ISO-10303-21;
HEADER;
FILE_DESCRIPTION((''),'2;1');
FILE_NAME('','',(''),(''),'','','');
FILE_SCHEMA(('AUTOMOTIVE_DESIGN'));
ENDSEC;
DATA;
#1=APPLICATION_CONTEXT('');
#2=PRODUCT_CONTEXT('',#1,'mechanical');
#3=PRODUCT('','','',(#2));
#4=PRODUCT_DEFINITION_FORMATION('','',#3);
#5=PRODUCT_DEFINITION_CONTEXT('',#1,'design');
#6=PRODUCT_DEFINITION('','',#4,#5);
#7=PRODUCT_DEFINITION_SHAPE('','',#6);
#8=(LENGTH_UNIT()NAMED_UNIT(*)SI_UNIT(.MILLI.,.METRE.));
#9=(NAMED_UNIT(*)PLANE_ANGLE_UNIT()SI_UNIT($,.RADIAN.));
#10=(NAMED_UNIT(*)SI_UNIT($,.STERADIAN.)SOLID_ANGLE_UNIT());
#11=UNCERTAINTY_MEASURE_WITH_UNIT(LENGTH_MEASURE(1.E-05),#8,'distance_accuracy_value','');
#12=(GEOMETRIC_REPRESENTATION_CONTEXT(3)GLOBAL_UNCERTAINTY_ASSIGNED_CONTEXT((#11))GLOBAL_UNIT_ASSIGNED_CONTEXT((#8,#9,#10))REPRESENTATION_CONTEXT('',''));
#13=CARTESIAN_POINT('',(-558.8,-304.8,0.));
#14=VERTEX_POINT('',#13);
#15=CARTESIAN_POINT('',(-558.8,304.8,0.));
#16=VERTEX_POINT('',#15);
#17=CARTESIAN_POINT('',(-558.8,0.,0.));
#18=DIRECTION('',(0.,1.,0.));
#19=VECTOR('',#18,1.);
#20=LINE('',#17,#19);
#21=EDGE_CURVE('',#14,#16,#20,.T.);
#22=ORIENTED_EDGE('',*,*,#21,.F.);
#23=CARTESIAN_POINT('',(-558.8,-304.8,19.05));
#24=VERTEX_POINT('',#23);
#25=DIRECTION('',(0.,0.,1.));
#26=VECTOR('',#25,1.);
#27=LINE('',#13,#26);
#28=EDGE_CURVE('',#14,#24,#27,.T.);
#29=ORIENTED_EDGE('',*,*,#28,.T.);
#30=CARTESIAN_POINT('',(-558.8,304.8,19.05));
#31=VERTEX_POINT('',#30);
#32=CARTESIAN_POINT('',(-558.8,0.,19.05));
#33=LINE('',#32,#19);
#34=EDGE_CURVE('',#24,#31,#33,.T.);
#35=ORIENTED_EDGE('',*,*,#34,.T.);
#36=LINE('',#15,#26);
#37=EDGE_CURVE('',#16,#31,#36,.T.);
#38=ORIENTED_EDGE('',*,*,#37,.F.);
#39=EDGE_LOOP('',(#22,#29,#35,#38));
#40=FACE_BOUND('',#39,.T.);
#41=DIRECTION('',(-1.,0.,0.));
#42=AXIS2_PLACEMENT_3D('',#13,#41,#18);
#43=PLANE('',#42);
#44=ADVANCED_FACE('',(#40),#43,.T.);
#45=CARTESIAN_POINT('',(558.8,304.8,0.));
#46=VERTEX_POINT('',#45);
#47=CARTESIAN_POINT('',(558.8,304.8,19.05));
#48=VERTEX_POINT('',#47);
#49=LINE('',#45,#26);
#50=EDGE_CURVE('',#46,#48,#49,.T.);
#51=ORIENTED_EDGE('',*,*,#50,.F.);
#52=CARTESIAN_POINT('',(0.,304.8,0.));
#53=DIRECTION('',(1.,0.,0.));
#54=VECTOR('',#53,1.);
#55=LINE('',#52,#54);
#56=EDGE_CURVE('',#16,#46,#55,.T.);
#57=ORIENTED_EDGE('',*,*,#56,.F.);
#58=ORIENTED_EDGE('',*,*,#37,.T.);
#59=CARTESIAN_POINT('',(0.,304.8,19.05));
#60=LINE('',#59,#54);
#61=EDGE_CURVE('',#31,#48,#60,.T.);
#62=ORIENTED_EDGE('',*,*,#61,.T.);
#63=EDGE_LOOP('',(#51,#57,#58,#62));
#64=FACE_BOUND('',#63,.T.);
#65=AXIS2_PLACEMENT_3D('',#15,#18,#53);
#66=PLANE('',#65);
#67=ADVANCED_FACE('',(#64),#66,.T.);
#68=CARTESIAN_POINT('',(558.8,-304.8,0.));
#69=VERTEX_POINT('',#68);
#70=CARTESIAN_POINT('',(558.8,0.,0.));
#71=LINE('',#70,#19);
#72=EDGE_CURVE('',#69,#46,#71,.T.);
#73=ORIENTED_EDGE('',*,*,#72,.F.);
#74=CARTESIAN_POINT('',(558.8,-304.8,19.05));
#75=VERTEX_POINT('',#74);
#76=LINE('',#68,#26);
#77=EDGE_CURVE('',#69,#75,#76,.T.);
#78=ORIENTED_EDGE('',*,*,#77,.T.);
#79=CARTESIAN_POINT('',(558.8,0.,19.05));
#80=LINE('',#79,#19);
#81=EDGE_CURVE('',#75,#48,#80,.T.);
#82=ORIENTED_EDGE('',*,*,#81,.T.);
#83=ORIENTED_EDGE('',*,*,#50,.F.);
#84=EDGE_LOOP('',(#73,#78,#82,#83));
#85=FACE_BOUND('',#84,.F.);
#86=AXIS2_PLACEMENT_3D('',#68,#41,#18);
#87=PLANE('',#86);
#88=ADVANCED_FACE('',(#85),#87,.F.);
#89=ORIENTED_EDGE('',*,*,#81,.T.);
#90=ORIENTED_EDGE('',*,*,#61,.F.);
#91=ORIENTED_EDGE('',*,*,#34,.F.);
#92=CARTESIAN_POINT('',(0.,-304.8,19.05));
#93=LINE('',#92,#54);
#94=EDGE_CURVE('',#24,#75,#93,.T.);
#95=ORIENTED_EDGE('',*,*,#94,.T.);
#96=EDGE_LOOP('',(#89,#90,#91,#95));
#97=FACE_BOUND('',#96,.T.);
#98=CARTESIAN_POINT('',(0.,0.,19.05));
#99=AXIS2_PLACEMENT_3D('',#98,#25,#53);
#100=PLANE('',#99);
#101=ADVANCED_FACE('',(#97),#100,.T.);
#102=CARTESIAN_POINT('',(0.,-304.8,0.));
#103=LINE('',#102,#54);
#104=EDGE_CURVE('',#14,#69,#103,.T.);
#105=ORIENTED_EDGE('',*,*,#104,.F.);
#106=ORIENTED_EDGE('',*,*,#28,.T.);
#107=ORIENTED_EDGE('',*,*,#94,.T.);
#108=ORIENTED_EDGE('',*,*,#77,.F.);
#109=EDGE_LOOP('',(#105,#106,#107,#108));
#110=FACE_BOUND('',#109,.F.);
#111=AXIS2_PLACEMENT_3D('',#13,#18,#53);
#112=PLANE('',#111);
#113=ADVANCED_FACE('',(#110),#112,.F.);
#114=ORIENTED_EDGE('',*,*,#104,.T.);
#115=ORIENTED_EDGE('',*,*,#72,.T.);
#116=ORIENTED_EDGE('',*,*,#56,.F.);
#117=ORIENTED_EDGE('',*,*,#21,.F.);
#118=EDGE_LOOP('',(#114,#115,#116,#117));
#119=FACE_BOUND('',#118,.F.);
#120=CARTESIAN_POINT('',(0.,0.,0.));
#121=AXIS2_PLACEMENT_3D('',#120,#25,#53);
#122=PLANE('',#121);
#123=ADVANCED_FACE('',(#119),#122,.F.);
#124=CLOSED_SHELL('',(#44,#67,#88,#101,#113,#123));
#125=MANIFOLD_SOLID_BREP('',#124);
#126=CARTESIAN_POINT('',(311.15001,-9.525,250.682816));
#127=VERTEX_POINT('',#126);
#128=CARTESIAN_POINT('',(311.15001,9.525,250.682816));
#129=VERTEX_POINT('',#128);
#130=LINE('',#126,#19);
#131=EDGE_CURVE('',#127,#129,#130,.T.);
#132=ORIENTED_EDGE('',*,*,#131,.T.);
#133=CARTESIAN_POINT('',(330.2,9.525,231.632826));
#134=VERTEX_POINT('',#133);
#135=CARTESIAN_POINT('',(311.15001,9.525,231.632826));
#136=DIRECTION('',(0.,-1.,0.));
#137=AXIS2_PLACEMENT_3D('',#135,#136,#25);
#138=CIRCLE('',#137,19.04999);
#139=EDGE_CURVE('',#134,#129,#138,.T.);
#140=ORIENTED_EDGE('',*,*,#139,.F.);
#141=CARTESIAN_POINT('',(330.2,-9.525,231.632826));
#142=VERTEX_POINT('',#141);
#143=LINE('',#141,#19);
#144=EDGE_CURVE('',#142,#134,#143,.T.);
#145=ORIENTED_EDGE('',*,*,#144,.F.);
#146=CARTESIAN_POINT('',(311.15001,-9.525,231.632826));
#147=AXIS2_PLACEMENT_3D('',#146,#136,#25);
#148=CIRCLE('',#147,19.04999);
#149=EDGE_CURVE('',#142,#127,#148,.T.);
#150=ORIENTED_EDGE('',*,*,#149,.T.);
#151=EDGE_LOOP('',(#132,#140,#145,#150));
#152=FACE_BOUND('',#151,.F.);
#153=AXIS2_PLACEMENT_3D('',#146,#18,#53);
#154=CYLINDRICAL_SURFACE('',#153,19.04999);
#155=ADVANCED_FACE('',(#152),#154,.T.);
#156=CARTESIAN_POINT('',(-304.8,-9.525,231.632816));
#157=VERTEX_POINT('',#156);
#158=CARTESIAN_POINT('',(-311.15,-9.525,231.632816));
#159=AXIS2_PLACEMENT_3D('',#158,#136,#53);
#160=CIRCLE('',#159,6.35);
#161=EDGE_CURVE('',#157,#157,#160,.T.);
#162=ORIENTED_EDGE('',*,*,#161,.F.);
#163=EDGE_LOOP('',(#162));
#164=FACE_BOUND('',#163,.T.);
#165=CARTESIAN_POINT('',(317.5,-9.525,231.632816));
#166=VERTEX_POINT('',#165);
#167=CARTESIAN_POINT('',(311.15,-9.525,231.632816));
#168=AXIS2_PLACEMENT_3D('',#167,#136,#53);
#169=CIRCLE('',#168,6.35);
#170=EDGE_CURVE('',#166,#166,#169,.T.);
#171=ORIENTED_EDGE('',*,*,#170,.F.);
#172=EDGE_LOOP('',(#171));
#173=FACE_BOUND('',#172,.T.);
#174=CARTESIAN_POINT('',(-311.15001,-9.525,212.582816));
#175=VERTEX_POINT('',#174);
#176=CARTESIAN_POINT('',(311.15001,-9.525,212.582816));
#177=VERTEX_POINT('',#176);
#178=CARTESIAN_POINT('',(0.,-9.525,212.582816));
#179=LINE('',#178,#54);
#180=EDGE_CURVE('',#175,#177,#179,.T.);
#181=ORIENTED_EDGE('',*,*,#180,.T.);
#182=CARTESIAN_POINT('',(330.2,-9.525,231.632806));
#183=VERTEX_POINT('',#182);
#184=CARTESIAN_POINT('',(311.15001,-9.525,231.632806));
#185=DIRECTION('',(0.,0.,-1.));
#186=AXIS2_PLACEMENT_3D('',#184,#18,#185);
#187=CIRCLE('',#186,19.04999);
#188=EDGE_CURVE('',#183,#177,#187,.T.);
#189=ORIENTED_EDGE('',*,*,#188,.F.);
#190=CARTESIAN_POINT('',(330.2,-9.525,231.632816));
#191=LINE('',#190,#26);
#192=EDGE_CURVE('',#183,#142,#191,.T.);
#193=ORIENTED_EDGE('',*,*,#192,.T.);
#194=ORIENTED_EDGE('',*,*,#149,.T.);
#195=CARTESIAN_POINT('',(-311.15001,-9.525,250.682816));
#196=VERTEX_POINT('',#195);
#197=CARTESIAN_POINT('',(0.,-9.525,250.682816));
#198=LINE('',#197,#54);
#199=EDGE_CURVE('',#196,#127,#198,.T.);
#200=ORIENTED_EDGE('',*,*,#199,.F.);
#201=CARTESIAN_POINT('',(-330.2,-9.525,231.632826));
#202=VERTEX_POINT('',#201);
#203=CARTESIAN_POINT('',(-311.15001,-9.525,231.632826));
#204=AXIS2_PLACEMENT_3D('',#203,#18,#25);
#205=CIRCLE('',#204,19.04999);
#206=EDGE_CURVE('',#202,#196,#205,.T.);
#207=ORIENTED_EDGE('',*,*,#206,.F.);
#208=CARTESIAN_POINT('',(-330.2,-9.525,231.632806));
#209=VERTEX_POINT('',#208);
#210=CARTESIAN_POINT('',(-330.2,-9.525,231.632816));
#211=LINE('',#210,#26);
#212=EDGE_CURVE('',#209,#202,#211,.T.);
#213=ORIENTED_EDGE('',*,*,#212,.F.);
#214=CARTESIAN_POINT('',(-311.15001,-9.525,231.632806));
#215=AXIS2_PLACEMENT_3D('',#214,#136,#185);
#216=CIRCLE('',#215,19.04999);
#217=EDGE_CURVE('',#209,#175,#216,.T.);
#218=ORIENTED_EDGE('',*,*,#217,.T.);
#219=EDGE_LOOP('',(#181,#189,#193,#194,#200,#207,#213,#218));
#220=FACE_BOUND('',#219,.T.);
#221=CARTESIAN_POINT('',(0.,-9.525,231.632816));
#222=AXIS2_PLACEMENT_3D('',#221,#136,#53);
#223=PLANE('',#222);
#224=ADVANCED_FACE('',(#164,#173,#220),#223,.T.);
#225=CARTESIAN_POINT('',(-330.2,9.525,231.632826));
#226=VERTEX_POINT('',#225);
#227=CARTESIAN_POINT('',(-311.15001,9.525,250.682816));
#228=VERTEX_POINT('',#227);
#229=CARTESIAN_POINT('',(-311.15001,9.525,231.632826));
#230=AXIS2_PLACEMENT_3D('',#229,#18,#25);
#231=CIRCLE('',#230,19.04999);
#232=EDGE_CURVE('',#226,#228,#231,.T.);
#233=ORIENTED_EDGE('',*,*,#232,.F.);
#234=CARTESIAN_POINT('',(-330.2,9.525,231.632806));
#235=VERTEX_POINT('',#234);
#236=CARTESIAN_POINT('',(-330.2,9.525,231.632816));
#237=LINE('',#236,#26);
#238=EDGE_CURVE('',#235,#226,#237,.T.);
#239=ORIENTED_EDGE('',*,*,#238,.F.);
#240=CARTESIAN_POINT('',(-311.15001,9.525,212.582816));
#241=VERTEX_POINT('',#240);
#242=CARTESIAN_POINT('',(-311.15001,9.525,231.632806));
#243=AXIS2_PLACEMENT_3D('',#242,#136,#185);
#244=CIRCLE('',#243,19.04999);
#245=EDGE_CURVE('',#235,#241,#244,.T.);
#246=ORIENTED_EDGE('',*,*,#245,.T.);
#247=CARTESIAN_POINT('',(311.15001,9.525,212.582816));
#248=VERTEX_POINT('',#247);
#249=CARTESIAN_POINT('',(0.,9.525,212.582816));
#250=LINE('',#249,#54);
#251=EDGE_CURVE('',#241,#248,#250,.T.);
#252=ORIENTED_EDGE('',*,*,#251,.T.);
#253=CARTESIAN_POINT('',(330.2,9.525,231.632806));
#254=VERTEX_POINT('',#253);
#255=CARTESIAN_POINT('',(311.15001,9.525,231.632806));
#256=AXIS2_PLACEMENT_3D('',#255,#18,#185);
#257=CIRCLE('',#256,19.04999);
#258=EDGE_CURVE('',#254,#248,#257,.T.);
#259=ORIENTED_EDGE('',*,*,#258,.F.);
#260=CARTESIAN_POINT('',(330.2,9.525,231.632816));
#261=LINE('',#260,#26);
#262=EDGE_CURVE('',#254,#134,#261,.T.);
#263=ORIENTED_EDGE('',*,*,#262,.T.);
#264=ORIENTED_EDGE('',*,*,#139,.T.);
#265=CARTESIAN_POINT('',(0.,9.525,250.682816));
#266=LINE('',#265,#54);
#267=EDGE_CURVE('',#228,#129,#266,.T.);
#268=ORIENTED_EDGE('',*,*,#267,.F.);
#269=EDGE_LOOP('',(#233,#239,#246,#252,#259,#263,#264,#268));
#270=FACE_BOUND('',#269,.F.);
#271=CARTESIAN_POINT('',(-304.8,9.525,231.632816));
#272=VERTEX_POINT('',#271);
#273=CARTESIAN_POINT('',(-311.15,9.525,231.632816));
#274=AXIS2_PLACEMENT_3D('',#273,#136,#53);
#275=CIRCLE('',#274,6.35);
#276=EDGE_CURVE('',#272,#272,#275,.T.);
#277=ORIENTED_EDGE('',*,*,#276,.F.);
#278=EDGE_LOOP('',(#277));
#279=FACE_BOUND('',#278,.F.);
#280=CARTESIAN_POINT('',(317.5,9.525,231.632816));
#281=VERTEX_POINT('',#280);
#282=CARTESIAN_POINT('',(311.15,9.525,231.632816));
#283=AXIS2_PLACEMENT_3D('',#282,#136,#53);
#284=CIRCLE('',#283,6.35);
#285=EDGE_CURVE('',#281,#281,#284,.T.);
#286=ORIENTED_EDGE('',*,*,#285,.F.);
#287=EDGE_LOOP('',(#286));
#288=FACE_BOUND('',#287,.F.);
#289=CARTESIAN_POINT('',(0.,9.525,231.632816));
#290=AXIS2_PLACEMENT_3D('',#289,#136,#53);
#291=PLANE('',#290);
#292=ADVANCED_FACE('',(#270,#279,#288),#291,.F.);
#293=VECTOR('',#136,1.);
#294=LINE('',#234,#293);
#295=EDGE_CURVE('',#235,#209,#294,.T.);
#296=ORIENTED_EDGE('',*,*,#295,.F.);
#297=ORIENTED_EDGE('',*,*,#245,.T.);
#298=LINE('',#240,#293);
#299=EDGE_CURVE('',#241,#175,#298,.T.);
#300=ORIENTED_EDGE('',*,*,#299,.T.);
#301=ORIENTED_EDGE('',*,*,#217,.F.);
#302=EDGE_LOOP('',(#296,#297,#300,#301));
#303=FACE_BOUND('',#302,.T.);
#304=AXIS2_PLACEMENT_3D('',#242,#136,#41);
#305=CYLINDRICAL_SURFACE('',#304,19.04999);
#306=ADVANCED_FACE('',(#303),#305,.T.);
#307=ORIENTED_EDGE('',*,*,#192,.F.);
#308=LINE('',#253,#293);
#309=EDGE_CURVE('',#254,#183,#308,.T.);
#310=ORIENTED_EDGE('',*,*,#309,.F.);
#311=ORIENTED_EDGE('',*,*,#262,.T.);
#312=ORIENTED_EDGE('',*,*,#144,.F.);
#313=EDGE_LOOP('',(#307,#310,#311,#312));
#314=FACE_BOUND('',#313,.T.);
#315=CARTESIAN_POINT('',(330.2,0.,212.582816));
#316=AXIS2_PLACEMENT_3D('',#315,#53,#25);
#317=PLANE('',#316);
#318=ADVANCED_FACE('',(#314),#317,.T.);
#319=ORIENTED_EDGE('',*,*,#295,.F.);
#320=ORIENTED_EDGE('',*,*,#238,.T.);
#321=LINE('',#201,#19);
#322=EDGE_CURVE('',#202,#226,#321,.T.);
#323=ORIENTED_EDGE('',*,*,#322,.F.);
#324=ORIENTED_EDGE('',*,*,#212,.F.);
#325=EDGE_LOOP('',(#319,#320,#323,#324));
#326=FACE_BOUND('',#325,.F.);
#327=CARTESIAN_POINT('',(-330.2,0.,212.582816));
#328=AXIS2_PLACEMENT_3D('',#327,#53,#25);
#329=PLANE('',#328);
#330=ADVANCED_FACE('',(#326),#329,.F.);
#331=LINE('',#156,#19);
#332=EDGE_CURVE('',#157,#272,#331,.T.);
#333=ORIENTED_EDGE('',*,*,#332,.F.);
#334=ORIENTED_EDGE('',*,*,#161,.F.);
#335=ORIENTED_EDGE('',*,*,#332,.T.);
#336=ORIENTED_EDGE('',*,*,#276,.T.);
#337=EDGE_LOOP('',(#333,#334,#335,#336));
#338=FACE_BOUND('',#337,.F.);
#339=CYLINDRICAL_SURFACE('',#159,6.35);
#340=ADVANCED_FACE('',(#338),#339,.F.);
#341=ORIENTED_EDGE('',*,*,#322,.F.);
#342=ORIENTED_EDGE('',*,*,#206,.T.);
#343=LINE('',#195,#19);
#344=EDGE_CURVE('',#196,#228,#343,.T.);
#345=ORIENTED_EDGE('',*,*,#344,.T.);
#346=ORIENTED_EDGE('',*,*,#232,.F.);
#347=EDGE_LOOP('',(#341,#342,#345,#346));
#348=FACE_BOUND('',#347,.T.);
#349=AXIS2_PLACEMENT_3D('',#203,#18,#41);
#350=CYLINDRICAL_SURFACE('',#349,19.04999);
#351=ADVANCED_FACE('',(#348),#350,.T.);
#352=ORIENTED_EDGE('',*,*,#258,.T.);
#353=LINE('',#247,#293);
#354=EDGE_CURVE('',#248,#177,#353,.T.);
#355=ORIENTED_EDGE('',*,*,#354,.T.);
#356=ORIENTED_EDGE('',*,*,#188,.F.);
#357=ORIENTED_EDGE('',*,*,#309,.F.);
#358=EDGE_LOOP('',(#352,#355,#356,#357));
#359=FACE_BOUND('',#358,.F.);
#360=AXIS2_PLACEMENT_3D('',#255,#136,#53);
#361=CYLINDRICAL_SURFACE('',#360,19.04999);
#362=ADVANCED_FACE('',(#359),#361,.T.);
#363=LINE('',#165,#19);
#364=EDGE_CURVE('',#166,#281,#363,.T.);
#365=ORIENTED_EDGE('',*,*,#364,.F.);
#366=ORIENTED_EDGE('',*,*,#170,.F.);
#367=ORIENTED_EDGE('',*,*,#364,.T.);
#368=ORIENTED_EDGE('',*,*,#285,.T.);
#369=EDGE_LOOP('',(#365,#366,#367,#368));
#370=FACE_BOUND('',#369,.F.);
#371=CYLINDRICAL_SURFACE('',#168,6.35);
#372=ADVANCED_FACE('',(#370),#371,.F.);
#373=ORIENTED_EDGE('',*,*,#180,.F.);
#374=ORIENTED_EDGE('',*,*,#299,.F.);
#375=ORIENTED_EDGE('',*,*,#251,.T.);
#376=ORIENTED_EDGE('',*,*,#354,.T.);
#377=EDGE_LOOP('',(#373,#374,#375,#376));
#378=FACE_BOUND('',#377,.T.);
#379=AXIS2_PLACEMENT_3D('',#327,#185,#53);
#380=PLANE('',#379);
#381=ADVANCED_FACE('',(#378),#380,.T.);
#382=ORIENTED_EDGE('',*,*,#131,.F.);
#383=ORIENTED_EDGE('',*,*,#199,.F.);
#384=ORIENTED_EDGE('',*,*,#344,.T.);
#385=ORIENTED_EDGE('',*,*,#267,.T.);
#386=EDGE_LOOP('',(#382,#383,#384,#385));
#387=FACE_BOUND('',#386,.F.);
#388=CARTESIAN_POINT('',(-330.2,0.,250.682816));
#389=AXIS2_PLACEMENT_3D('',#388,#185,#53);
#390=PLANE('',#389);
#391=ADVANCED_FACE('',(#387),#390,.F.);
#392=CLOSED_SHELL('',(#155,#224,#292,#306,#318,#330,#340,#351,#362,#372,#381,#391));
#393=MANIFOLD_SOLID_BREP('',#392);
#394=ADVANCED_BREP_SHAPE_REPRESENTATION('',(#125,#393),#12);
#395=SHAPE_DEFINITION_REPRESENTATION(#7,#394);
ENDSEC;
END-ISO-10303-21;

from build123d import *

# Parameters (mm, degrees)
F0_W     = 1117.6
F0_H     = 609.6
F1_DEPTH = 19.05
F2_W     = 660.4
F2_H     = 38.1
F3_DEPTH = 9.525
F4_R     = 19.04999
F5_R     = 6.35
F6_DEPTH = 314.326


# Not quite as in the source:
# - a fillet or chamfer is up to 0.001 mm smaller than in the source, because OpenCascade refuses the exact size


with BuildPart() as f1:
    # F0 (on Top) → F1 (new body)
    with BuildSketch(Plane.XY):
        Rectangle(F0_W, F0_H)
    extrude(amount=F1_DEPTH)


with BuildPart() as f3:
    # F2 (on Front) → F3 (new body, symmetric)
    with BuildSketch(Plane.XZ):
        with Locations((0, 231.6328159059)):
            Rectangle(F2_W, F2_H)
    extrude(amount=F3_DEPTH, both=True)

    # F4 (radius 19.05 in the source; OpenCascade refuses exactly that, so slightly less here)
    f4_edges = [f3.edges().sort_by_distance(p)[0] for p in [
        (330.2, 0, 250.682816),
        (330.2, 0, 212.582816),
        (-330.2, 0, 250.682816),
        (-330.2, 0, 212.582816),
    ]]
    fillet(f4_edges, radius=F4_R)

    # F5 (on face) → F6 (cut, through all)
    with BuildSketch(Plane.XZ.offset(9.525)):
        with Locations((-311.15, 231.6328159059)):
            Circle(F5_R)
        with Locations((311.15, 231.6328159059)):
            Circle(F5_R)
    extrude(amount=-F6_DEPTH, mode=Mode.SUBTRACT)


solid = Compound([f1.part, f3.part])
